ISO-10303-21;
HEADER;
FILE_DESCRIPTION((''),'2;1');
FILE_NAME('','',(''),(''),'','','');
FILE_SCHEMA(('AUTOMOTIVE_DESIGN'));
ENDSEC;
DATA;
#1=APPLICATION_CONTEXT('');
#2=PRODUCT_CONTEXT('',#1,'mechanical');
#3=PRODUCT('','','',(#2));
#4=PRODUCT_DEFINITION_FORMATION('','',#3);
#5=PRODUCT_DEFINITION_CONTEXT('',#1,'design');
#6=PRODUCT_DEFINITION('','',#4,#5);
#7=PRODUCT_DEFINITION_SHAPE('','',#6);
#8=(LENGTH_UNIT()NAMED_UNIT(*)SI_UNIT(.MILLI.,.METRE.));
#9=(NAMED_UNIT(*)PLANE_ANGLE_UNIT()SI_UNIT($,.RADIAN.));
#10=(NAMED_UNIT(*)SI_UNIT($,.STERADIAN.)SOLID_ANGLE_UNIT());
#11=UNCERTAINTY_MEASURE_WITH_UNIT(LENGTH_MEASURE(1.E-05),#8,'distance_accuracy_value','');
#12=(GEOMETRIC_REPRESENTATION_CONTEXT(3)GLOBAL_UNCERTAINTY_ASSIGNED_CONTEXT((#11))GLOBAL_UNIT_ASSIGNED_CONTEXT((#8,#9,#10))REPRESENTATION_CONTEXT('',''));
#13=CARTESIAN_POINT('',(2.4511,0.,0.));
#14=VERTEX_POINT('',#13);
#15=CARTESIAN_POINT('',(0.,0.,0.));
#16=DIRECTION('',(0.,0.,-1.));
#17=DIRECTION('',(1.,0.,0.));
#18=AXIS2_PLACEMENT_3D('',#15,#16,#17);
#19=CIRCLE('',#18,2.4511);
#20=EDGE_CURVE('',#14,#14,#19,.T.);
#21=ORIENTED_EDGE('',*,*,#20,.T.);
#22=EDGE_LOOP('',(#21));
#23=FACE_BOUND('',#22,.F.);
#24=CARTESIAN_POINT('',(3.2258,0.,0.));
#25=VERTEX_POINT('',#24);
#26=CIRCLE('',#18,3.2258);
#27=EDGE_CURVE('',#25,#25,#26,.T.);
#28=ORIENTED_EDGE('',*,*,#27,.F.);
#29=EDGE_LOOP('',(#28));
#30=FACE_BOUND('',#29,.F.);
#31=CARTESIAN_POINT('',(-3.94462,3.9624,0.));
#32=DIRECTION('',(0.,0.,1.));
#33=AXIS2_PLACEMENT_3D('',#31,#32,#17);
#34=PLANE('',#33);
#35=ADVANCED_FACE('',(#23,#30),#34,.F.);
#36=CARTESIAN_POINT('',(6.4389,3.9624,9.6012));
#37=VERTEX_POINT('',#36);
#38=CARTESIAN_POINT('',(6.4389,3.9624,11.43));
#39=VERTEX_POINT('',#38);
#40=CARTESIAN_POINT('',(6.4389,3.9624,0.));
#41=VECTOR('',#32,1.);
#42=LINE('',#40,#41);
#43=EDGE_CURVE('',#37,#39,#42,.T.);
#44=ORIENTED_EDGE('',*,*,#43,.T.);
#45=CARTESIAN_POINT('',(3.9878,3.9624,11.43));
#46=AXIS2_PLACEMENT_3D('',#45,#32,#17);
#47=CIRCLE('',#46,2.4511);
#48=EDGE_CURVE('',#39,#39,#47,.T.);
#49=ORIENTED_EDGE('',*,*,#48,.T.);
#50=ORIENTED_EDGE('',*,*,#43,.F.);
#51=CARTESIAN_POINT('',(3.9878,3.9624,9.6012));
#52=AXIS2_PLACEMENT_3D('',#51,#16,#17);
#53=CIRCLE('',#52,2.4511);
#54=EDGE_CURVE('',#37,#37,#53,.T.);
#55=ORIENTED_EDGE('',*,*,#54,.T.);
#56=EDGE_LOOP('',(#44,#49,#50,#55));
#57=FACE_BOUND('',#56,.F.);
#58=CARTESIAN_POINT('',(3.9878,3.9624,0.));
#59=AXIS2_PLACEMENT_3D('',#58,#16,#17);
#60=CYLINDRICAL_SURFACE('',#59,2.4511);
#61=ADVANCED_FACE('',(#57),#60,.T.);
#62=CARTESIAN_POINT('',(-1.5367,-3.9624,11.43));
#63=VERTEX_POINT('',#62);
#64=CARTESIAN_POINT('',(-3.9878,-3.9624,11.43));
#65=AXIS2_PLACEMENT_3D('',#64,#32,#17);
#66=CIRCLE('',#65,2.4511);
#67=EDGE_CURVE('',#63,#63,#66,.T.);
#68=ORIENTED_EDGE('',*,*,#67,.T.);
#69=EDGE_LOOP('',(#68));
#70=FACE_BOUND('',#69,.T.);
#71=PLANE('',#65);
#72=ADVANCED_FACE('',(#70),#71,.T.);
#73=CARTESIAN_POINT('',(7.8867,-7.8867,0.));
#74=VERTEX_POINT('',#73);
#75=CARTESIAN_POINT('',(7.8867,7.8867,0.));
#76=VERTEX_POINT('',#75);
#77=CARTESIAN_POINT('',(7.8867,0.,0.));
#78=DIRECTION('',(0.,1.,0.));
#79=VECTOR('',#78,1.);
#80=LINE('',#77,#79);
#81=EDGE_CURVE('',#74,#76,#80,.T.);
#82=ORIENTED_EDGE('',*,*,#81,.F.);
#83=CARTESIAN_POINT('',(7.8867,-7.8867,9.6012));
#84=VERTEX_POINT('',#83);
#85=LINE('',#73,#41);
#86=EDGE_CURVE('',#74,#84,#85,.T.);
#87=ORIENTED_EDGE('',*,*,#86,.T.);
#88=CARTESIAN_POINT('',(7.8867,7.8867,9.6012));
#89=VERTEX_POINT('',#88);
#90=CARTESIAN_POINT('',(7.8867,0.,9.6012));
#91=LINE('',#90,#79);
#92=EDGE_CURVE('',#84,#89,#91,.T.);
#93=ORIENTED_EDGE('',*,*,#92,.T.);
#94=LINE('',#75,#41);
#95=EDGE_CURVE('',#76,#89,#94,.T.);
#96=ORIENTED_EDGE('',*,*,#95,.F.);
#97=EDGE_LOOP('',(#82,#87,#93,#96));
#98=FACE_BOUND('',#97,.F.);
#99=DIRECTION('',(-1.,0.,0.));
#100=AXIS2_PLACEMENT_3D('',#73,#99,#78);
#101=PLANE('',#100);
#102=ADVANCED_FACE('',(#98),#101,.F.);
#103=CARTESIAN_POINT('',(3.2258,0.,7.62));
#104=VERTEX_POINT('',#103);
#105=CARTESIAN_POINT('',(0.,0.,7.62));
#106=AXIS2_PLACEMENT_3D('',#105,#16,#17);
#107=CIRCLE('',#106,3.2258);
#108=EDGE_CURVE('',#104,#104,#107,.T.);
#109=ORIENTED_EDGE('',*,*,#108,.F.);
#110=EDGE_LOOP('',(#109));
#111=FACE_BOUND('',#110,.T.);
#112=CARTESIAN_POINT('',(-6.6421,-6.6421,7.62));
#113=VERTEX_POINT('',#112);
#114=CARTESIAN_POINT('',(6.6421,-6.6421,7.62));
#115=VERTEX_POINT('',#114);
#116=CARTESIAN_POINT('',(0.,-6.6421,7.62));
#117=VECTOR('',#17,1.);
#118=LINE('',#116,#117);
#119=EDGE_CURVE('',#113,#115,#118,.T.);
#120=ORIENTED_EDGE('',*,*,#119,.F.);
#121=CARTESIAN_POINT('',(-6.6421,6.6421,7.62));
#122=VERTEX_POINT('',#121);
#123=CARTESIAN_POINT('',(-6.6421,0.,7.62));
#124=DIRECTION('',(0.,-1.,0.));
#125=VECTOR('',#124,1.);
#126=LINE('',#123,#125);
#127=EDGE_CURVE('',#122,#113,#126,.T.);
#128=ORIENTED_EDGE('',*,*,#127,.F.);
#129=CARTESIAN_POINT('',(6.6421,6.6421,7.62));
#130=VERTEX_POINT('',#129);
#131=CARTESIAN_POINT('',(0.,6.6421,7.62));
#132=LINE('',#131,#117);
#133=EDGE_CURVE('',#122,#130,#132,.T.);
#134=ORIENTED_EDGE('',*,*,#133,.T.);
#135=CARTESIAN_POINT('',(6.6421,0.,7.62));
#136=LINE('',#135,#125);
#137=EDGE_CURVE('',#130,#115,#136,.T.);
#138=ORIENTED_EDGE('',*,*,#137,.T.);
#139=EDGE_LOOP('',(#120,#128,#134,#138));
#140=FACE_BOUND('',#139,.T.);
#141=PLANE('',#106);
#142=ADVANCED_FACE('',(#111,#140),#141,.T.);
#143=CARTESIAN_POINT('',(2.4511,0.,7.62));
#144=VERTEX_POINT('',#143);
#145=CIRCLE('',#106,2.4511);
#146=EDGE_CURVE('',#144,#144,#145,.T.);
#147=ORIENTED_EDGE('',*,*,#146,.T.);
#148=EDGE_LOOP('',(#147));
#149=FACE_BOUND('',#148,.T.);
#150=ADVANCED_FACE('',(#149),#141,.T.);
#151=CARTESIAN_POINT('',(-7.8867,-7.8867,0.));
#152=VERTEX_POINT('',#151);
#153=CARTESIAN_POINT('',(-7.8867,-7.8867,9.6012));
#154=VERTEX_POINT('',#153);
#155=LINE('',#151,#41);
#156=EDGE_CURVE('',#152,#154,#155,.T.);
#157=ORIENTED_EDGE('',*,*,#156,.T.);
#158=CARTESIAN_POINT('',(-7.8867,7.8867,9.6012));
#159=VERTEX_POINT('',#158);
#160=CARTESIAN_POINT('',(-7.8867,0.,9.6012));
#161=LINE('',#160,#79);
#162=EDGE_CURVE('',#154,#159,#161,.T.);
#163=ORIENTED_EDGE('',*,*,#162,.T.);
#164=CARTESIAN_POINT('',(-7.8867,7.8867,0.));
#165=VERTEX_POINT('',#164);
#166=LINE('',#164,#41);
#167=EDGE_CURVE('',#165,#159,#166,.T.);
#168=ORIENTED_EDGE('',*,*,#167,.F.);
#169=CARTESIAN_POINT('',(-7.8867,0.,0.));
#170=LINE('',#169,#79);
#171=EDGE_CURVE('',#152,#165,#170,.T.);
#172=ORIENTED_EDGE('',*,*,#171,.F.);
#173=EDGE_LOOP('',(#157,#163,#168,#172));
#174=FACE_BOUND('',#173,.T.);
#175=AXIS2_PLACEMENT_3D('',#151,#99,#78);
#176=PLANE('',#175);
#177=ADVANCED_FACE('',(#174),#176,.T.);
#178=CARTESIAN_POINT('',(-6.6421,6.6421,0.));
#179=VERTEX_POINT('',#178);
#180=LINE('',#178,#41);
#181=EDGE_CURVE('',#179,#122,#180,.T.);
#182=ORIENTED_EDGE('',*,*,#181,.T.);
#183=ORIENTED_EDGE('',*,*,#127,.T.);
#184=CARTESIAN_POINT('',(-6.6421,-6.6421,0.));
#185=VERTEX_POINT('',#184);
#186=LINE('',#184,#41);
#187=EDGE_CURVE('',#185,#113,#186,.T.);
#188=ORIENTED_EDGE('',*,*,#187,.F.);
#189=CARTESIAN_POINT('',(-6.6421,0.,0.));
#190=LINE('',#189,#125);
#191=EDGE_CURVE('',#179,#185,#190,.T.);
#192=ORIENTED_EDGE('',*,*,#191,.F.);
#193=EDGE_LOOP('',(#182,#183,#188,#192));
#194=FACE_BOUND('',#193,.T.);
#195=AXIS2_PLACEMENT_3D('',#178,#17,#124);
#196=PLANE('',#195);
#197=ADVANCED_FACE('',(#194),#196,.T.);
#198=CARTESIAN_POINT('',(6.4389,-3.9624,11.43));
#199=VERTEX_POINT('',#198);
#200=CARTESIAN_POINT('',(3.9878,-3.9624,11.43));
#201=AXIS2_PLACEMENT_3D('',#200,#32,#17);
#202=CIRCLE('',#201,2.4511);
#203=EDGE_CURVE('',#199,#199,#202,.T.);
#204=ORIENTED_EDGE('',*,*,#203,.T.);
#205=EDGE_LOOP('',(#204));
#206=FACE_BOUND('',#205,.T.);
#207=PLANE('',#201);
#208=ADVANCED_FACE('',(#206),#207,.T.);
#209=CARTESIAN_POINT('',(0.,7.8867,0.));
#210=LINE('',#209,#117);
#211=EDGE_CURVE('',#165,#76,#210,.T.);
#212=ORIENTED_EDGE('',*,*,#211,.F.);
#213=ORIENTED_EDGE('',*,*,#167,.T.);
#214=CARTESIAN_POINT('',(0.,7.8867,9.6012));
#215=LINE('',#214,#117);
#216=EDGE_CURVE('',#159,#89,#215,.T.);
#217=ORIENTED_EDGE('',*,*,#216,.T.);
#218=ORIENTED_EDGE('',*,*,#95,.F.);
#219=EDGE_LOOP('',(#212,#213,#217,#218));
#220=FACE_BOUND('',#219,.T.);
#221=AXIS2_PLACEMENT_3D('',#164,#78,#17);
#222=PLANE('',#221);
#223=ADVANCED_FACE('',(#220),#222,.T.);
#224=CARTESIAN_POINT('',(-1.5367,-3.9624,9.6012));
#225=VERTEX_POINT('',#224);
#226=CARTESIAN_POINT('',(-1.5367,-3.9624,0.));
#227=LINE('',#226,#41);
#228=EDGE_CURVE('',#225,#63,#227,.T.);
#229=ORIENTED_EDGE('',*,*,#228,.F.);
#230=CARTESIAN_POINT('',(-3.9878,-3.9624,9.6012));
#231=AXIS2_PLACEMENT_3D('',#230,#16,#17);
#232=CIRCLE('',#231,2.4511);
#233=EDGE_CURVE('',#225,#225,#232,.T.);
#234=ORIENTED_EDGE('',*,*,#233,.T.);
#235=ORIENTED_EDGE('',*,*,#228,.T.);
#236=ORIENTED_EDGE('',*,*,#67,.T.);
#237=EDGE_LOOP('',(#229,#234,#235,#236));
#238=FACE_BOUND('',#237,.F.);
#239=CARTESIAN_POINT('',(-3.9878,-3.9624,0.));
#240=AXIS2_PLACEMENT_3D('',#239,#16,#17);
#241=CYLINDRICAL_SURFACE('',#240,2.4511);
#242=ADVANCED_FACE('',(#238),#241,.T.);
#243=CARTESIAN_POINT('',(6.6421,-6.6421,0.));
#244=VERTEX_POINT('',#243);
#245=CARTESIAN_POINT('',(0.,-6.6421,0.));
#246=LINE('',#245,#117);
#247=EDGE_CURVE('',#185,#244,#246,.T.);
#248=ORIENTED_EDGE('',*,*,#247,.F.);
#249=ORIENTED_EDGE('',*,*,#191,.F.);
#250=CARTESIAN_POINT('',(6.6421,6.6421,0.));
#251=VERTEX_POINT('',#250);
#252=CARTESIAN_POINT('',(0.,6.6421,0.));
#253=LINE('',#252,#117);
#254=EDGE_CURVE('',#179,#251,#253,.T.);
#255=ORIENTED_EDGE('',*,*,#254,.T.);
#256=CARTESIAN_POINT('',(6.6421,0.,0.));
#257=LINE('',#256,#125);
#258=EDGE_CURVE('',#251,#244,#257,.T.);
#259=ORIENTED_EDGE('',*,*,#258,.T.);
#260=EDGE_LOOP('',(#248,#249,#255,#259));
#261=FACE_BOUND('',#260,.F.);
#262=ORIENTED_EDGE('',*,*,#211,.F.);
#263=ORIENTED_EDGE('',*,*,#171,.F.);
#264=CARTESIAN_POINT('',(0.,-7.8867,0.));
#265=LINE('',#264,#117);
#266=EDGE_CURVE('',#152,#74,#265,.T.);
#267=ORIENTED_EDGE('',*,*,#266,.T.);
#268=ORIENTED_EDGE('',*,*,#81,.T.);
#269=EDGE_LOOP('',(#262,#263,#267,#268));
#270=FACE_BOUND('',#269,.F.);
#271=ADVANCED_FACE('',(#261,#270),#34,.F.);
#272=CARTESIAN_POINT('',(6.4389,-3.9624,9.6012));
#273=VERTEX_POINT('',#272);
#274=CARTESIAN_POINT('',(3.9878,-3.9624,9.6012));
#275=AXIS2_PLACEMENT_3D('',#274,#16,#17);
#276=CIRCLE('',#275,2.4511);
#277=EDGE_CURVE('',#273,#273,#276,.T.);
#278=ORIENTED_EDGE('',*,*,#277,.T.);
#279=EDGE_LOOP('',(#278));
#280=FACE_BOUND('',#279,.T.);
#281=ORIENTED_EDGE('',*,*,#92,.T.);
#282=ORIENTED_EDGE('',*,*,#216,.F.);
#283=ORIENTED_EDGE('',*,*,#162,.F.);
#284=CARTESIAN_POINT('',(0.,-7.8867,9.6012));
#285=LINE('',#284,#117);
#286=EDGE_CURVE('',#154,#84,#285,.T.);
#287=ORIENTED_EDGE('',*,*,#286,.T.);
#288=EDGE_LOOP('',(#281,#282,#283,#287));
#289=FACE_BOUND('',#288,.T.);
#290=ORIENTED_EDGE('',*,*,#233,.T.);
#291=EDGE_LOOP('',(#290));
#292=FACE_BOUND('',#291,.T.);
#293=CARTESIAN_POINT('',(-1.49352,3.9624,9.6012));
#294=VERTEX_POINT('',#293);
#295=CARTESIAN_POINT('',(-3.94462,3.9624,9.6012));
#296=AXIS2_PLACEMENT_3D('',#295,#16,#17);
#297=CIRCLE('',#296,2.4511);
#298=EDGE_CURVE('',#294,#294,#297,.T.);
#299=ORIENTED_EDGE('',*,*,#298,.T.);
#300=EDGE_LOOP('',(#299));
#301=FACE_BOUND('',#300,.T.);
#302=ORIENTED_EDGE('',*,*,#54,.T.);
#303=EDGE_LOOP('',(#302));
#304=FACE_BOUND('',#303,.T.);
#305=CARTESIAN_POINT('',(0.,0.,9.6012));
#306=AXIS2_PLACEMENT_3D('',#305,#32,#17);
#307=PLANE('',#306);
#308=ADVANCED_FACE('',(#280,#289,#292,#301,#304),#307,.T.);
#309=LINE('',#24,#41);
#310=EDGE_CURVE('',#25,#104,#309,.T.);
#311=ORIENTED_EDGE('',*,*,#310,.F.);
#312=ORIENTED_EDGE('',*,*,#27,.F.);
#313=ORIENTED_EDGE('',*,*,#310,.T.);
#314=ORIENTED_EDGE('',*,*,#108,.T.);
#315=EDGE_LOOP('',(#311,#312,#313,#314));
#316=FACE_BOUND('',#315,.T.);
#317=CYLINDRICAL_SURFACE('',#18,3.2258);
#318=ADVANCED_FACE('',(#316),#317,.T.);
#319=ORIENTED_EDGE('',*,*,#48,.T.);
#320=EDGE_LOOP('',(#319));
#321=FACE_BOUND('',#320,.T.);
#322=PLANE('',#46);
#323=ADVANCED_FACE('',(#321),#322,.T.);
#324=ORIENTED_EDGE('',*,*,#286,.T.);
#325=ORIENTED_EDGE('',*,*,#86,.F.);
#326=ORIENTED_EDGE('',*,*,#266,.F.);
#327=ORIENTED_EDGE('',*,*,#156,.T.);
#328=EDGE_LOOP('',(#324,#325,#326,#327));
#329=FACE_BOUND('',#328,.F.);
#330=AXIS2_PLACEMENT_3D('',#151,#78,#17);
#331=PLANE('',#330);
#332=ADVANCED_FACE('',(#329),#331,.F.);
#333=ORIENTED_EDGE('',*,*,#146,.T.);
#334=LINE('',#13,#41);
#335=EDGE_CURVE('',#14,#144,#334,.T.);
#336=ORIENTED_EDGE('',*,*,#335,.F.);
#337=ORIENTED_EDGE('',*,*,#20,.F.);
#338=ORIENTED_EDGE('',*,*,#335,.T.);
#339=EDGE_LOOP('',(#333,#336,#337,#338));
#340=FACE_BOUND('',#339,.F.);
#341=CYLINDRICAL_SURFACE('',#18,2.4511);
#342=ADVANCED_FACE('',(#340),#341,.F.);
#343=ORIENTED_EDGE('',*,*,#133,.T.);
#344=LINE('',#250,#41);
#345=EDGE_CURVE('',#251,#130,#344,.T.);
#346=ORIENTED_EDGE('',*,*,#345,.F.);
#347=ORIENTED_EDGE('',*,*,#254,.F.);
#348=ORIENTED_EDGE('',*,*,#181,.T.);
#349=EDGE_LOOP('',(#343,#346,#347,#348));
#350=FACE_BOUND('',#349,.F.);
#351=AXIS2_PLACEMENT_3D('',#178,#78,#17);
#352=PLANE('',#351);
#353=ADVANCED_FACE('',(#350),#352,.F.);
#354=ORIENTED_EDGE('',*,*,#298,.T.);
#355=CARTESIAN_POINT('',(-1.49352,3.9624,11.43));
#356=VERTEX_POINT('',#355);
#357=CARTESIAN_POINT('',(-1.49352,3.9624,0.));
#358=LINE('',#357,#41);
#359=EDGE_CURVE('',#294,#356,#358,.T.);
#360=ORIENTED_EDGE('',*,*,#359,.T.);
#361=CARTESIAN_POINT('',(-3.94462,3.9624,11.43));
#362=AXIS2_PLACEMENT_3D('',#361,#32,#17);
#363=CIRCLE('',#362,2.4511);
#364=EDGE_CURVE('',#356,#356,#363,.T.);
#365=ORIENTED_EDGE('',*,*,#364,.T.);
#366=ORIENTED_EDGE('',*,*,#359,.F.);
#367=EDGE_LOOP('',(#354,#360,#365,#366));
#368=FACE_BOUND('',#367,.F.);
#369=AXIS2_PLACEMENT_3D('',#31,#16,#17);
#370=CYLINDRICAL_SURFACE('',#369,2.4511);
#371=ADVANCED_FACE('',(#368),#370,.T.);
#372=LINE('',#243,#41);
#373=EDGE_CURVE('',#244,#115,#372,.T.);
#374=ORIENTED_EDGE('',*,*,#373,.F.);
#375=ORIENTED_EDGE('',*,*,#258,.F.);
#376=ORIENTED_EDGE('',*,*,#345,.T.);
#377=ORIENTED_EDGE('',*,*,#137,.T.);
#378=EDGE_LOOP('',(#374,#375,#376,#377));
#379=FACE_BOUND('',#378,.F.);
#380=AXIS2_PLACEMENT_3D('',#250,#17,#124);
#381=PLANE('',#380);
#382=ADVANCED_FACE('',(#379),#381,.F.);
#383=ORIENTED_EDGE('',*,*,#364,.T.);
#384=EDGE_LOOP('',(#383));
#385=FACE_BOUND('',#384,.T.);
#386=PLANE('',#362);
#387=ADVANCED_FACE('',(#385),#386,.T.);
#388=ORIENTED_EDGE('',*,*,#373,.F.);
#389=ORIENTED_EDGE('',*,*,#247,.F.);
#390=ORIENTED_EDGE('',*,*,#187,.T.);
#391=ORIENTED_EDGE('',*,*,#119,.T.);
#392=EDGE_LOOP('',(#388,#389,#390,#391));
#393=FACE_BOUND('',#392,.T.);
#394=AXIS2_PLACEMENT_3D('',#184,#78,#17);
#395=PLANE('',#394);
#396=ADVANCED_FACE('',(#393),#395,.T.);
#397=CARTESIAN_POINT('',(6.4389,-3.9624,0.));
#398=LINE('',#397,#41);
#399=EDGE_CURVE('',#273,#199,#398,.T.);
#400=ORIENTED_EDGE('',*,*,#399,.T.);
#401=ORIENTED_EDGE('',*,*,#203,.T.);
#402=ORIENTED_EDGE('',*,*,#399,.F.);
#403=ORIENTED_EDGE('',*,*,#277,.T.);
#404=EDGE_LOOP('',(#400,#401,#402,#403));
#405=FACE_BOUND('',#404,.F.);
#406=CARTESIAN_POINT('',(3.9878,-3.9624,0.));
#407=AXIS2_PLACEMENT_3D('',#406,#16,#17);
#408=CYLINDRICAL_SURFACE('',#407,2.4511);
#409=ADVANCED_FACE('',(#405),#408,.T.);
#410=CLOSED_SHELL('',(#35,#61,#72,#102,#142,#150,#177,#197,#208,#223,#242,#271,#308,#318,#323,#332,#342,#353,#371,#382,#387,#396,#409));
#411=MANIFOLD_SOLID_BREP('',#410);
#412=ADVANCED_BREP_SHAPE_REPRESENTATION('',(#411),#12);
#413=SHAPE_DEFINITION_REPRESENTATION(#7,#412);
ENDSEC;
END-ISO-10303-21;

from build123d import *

# Parameters (mm, degrees)
F0_W     = 15.7734
F0_H     = 15.7734
F1_DEPTH = 9.6012
F2_R     = 2.4511
F3_DEPTH = 11.43
F4_W     = 13.2842
F4_H     = 13.2842
F4_R     = 3.2258
F5_DEPTH = 7.62
F6_R     = 2.4511
F7_DEPTH = 7.62


# Not quite as in the source:
# - a feature names something its author has since deleted; it is built from what else it names


with BuildPart() as f1:
    # F0 (on Top) → F1 (new body)
    with BuildSketch(Plane.XY):
        Rectangle(F0_W, F0_H)
    extrude(amount=F1_DEPTH)

    # F2 (on face) → F3 (join)
    with BuildSketch(Plane.XY):
        with Locations((-3.94462, 3.9624)):
            Circle(F2_R)
        with Locations((3.9878, 3.9624)):
            Circle(F2_R)
        with Locations((-3.9878, -3.9624)):
            Circle(F2_R)
        with Locations((3.9878, -3.9624)):
            Circle(F2_R)
    extrude(amount=F3_DEPTH)

    # F4 (on face) → F5 (cut)
    with BuildSketch(Plane(origin=(0, 0, 0), x_dir=(1, 0, 0), z_dir=(0, 0, -1))):
        Rectangle(F4_W, F4_H)
        Circle(F4_R, mode=Mode.SUBTRACT)
    extrude(amount=-F5_DEPTH, mode=Mode.SUBTRACT)

    # F6 (on face) → F7 (cut)
    with BuildSketch(Plane(origin=(0, 0, 0), x_dir=(1, 0, 0), z_dir=(0, 0, -1))):
        Circle(F6_R)
    extrude(amount=-F7_DEPTH, mode=Mode.SUBTRACT)


solid = f1.part
